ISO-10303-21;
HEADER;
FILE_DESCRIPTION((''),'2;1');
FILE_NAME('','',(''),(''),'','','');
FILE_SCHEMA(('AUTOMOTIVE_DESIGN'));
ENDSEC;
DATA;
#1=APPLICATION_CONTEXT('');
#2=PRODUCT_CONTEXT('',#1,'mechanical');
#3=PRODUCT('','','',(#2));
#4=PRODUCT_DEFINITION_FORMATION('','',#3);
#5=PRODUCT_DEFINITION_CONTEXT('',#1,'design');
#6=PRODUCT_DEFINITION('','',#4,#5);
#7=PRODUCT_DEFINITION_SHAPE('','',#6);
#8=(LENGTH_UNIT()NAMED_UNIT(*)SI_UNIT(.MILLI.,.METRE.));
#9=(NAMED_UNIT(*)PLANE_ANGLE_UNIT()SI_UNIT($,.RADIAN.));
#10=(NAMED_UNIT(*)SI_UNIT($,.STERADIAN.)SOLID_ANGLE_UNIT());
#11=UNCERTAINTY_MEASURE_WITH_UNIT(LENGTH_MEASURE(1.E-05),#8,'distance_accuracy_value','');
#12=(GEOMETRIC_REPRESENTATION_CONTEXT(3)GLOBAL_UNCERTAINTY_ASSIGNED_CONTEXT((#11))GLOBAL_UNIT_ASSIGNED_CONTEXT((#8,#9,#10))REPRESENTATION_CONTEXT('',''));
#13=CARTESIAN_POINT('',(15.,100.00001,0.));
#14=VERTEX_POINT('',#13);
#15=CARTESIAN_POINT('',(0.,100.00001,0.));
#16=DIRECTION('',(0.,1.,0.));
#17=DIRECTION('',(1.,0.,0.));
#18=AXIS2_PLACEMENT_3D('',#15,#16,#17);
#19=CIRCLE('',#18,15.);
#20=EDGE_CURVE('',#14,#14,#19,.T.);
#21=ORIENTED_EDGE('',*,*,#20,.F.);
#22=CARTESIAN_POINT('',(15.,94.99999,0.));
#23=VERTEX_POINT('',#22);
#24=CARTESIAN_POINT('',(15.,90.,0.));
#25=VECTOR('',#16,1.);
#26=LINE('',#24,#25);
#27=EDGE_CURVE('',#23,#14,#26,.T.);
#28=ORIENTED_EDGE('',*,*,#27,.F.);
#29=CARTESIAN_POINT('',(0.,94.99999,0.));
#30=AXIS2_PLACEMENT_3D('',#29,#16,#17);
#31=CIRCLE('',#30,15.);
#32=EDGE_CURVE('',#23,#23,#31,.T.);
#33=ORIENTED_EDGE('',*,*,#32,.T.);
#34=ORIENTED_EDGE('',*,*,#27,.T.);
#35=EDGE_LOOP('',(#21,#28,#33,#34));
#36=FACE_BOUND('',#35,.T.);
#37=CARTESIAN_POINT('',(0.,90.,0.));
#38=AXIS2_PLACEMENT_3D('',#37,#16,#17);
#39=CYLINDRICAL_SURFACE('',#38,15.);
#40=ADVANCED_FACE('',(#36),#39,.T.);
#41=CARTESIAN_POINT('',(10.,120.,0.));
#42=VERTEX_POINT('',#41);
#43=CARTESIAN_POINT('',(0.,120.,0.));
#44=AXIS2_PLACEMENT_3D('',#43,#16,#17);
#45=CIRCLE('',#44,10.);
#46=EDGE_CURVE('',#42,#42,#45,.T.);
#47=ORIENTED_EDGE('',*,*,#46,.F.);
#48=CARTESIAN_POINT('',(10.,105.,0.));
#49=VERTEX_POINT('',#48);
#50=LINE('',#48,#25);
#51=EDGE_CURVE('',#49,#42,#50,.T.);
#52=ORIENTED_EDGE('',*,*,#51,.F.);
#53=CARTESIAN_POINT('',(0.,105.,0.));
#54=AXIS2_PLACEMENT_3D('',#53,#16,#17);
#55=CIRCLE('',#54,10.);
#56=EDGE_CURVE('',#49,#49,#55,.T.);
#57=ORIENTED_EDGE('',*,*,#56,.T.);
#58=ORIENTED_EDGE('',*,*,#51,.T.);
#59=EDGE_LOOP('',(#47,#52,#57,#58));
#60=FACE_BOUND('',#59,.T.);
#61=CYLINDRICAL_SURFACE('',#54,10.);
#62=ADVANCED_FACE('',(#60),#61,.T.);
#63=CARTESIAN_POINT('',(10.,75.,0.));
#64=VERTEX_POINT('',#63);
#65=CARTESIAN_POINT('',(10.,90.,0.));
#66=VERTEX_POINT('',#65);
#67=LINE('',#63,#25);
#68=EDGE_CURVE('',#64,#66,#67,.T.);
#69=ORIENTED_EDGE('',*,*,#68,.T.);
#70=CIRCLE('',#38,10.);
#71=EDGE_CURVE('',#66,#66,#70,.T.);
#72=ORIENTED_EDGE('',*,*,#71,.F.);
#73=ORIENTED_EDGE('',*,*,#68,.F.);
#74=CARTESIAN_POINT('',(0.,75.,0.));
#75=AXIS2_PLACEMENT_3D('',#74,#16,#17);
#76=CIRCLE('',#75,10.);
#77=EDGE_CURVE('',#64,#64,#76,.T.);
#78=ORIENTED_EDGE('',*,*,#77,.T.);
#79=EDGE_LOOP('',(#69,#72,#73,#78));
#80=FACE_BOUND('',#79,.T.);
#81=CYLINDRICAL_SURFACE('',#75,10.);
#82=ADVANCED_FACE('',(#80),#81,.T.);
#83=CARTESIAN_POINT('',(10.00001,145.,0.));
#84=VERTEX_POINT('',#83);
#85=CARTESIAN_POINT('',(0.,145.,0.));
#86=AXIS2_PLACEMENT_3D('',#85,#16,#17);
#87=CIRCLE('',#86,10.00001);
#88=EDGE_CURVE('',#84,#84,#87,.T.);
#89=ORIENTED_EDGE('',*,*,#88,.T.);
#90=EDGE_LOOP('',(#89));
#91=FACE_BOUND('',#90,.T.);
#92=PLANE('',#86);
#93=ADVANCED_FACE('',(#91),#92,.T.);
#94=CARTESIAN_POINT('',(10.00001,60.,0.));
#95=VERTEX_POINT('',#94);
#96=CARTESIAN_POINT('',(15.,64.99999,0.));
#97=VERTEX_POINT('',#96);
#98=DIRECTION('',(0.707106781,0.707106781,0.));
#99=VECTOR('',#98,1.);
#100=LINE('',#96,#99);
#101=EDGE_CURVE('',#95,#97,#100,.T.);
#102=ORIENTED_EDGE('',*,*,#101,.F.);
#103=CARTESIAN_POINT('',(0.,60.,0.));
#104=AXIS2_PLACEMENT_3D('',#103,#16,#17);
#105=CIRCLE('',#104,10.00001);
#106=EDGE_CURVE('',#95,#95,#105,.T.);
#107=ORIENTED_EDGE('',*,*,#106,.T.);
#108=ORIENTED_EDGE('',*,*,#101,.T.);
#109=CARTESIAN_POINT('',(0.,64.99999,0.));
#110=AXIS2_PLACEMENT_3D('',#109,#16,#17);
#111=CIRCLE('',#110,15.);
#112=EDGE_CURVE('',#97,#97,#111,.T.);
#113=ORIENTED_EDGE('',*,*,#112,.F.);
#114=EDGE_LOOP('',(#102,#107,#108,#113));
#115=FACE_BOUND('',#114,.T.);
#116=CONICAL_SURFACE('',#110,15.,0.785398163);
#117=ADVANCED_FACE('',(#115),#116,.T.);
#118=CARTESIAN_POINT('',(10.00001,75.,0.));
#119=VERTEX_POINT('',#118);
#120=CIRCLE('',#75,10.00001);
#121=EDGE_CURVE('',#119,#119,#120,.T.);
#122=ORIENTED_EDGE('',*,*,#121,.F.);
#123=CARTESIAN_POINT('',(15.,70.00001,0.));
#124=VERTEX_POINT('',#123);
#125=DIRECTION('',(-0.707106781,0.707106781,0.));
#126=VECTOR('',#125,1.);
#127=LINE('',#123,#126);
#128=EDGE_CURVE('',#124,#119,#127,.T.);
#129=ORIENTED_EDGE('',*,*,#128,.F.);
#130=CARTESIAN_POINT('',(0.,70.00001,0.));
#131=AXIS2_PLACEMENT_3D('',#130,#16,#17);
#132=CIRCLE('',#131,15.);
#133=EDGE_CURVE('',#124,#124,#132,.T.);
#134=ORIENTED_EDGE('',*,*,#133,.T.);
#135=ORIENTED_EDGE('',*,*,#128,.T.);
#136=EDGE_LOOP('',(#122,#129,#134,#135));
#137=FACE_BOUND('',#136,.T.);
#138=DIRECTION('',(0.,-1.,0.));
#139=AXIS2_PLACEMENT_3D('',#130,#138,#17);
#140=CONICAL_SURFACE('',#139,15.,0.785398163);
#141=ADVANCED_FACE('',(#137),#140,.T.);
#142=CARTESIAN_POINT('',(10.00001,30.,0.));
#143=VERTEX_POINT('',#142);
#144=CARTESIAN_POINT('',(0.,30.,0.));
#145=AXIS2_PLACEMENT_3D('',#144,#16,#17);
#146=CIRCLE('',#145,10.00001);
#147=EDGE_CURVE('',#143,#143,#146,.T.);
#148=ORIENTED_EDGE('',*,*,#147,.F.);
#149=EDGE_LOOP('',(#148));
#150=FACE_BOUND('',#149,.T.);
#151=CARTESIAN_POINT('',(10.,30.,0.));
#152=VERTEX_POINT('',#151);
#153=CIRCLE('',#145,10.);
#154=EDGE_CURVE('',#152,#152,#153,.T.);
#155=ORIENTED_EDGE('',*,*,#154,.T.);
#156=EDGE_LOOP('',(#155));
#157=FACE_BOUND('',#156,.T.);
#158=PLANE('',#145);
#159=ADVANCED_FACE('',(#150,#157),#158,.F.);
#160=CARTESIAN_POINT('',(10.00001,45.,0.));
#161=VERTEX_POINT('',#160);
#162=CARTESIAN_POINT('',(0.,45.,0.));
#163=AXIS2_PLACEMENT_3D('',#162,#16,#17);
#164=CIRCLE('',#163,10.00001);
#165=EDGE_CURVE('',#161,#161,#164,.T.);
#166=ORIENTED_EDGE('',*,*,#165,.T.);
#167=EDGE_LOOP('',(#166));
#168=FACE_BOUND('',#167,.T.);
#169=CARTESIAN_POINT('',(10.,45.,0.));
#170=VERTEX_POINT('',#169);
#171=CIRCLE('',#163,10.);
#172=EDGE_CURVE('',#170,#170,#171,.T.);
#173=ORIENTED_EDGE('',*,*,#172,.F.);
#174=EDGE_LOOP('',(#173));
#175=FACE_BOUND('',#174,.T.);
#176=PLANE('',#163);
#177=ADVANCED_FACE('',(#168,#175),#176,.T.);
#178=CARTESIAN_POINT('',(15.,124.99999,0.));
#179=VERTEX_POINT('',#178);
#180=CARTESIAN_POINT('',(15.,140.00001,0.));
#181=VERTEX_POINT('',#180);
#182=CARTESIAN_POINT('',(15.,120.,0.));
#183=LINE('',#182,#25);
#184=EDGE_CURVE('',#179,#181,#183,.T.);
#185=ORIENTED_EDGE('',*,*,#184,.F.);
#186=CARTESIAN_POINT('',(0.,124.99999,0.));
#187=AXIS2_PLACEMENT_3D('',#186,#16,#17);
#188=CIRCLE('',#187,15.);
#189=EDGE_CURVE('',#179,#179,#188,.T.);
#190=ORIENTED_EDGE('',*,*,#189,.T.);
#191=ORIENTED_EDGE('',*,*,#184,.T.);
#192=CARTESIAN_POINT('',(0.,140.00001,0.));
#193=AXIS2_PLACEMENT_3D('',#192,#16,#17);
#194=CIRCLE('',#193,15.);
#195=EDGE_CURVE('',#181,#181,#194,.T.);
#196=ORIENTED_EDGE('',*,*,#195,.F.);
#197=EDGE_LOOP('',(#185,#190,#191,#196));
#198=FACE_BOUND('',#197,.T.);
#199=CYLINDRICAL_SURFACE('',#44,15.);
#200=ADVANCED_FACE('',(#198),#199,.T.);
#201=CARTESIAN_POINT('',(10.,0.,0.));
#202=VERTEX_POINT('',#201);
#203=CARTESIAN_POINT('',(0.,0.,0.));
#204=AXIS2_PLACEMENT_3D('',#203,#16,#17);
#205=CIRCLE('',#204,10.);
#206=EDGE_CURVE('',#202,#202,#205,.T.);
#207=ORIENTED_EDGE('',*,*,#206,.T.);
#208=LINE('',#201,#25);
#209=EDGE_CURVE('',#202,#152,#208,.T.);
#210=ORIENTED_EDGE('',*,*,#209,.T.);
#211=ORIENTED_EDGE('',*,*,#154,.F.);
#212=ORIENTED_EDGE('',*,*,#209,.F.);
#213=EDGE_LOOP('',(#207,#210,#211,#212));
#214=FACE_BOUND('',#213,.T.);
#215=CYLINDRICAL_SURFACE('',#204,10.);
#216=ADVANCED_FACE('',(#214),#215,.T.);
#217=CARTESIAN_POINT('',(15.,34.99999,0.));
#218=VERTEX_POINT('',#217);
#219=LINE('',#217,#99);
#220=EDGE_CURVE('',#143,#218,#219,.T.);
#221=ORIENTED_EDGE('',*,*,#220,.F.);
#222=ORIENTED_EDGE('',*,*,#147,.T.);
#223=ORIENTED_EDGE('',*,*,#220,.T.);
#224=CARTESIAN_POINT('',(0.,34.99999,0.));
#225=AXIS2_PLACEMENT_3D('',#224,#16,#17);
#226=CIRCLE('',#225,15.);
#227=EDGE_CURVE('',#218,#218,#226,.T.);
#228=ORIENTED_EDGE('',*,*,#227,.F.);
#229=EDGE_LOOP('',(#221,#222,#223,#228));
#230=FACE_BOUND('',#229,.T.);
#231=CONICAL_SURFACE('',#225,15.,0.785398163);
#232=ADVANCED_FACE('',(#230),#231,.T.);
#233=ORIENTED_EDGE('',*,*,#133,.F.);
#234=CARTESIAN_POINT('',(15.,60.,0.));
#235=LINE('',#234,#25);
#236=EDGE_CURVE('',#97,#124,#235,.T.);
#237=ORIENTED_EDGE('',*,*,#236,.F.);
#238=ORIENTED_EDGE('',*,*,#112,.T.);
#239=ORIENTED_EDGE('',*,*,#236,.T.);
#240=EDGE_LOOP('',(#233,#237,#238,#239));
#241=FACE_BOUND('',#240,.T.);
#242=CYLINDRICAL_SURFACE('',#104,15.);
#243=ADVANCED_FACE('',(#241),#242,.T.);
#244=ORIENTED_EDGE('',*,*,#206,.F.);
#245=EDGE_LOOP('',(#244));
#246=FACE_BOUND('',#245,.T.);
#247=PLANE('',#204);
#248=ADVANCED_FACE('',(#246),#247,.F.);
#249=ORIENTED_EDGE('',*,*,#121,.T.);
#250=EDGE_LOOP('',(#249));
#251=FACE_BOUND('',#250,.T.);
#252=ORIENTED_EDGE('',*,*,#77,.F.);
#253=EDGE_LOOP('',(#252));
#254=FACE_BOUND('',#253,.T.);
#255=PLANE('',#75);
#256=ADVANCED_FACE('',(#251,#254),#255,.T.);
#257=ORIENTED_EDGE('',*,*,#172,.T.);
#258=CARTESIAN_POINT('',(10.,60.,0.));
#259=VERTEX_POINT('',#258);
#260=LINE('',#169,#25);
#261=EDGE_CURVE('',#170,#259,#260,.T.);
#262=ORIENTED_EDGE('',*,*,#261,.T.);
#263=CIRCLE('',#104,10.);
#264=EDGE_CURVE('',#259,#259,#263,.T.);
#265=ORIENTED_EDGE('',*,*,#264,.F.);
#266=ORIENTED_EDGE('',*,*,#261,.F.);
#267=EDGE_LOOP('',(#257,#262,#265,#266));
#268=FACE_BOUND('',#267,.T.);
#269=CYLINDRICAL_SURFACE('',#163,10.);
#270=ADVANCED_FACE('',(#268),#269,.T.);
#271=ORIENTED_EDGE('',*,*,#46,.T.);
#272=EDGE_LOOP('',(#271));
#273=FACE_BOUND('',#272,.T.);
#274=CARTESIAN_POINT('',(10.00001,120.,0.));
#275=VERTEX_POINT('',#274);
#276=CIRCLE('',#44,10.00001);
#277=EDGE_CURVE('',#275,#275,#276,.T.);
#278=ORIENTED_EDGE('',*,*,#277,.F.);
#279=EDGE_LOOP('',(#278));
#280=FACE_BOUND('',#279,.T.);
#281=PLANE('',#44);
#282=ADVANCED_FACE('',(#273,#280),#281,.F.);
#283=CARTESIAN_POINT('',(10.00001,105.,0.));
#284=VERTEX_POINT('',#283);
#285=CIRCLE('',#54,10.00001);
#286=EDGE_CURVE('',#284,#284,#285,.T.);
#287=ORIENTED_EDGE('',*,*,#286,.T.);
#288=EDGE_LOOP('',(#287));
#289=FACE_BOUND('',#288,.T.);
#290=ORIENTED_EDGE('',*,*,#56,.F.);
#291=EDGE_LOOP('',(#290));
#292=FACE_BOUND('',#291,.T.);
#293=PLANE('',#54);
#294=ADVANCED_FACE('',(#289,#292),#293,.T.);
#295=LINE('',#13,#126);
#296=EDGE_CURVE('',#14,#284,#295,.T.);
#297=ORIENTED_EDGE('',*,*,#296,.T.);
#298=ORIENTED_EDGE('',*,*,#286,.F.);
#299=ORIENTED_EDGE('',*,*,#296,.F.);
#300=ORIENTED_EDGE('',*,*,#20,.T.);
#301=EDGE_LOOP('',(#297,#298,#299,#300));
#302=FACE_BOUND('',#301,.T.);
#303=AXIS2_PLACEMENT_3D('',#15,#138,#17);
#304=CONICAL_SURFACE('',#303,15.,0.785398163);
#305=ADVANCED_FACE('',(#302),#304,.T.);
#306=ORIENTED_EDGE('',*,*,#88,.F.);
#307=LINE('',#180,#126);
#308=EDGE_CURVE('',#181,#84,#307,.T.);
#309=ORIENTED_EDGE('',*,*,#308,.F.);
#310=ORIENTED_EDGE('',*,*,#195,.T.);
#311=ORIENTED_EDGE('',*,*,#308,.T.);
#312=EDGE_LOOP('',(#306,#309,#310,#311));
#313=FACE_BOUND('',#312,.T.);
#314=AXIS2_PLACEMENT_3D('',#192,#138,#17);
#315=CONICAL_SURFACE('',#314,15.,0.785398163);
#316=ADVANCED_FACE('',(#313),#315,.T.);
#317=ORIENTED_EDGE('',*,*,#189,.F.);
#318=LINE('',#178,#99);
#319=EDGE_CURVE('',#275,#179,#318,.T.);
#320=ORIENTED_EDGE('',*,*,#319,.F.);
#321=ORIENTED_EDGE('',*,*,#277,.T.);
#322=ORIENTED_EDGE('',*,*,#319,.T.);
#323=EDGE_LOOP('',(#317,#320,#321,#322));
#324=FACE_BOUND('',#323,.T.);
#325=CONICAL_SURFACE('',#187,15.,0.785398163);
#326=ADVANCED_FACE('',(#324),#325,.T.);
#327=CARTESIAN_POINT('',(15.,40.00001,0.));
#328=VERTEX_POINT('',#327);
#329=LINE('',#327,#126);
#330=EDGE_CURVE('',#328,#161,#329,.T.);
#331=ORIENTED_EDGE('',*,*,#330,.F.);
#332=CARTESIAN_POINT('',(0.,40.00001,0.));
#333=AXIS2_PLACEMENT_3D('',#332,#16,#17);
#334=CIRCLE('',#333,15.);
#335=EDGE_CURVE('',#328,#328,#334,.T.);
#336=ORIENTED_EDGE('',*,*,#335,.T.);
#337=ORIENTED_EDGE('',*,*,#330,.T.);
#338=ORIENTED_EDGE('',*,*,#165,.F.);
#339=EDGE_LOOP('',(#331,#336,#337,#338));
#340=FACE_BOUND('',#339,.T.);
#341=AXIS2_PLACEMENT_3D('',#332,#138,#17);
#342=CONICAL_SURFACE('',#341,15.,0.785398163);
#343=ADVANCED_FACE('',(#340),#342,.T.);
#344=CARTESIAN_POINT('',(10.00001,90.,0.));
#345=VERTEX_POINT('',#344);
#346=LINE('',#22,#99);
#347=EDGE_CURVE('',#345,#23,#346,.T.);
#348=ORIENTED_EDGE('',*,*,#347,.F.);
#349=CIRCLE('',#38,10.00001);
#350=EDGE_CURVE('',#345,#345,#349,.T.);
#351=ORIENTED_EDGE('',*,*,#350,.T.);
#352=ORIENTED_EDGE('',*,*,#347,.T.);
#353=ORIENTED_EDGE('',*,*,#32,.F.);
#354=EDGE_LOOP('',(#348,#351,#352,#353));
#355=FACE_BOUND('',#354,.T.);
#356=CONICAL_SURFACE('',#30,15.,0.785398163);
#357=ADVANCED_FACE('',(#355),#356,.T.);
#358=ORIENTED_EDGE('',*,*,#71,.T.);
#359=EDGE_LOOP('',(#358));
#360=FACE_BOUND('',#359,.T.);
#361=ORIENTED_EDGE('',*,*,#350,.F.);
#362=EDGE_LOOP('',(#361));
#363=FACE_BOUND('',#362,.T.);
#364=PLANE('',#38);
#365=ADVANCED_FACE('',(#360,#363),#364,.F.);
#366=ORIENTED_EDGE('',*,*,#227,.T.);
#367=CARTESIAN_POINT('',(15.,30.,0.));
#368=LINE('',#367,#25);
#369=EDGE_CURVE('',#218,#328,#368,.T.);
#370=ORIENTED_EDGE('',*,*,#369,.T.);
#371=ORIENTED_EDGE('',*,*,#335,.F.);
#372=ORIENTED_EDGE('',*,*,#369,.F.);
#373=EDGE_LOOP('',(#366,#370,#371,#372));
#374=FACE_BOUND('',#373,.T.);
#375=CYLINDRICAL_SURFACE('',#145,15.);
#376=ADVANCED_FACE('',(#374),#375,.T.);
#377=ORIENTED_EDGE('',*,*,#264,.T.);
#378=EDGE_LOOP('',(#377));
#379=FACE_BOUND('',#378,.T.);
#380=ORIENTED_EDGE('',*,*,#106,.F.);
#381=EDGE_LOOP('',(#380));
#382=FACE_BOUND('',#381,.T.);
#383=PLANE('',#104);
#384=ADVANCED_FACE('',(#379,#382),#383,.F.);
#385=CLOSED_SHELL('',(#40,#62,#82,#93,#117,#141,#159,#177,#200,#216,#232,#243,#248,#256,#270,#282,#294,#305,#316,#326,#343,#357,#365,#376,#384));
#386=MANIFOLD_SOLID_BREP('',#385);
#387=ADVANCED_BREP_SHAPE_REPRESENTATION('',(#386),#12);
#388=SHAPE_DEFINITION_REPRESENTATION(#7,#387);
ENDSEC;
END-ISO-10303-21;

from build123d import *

# Parameters (mm, degrees)
F2_SIZE = 4.99999


# Not quite as in the source:
# - a fillet or chamfer is up to 0.001 mm smaller than in the source, because OpenCascade refuses the exact size
# - a feature names something its author has since deleted; it is built from what else it names


with BuildPart() as f1:
    # F0 (on Top) → F1 (revolve)
    with BuildSketch(Plane.XY):
        Polygon((0, 145), (0, 0), (10, 0), (10, 30), (15, 30), (15, 45), (10, 45), (10, 60), (15, 60), (15, 75), (10, 75), (10, 90), (15, 90), (15, 105), (10, 105), (10, 120), (15, 120), (15, 145), align=None)
    revolve(axis=Axis((0, 72.5, 0), (0, 1, 0)))

    # F2 (size 5 in the source; OpenCascade refuses exactly that, so slightly less here)
    f2_edges = [f1.edges().sort_by_distance(p)[0] for p in [
        (-15, 105, 0),
        (-15, 90, 0),
        (-15, 75, 0),
        (-15, 60, 0),
        (-15, 45, 0),
        (-15, 30, 0),
        (-15, 120, 0),
        (-15, 145, 0),
    ]]
    chamfer(f2_edges, length=F2_SIZE)


solid = f1.part
